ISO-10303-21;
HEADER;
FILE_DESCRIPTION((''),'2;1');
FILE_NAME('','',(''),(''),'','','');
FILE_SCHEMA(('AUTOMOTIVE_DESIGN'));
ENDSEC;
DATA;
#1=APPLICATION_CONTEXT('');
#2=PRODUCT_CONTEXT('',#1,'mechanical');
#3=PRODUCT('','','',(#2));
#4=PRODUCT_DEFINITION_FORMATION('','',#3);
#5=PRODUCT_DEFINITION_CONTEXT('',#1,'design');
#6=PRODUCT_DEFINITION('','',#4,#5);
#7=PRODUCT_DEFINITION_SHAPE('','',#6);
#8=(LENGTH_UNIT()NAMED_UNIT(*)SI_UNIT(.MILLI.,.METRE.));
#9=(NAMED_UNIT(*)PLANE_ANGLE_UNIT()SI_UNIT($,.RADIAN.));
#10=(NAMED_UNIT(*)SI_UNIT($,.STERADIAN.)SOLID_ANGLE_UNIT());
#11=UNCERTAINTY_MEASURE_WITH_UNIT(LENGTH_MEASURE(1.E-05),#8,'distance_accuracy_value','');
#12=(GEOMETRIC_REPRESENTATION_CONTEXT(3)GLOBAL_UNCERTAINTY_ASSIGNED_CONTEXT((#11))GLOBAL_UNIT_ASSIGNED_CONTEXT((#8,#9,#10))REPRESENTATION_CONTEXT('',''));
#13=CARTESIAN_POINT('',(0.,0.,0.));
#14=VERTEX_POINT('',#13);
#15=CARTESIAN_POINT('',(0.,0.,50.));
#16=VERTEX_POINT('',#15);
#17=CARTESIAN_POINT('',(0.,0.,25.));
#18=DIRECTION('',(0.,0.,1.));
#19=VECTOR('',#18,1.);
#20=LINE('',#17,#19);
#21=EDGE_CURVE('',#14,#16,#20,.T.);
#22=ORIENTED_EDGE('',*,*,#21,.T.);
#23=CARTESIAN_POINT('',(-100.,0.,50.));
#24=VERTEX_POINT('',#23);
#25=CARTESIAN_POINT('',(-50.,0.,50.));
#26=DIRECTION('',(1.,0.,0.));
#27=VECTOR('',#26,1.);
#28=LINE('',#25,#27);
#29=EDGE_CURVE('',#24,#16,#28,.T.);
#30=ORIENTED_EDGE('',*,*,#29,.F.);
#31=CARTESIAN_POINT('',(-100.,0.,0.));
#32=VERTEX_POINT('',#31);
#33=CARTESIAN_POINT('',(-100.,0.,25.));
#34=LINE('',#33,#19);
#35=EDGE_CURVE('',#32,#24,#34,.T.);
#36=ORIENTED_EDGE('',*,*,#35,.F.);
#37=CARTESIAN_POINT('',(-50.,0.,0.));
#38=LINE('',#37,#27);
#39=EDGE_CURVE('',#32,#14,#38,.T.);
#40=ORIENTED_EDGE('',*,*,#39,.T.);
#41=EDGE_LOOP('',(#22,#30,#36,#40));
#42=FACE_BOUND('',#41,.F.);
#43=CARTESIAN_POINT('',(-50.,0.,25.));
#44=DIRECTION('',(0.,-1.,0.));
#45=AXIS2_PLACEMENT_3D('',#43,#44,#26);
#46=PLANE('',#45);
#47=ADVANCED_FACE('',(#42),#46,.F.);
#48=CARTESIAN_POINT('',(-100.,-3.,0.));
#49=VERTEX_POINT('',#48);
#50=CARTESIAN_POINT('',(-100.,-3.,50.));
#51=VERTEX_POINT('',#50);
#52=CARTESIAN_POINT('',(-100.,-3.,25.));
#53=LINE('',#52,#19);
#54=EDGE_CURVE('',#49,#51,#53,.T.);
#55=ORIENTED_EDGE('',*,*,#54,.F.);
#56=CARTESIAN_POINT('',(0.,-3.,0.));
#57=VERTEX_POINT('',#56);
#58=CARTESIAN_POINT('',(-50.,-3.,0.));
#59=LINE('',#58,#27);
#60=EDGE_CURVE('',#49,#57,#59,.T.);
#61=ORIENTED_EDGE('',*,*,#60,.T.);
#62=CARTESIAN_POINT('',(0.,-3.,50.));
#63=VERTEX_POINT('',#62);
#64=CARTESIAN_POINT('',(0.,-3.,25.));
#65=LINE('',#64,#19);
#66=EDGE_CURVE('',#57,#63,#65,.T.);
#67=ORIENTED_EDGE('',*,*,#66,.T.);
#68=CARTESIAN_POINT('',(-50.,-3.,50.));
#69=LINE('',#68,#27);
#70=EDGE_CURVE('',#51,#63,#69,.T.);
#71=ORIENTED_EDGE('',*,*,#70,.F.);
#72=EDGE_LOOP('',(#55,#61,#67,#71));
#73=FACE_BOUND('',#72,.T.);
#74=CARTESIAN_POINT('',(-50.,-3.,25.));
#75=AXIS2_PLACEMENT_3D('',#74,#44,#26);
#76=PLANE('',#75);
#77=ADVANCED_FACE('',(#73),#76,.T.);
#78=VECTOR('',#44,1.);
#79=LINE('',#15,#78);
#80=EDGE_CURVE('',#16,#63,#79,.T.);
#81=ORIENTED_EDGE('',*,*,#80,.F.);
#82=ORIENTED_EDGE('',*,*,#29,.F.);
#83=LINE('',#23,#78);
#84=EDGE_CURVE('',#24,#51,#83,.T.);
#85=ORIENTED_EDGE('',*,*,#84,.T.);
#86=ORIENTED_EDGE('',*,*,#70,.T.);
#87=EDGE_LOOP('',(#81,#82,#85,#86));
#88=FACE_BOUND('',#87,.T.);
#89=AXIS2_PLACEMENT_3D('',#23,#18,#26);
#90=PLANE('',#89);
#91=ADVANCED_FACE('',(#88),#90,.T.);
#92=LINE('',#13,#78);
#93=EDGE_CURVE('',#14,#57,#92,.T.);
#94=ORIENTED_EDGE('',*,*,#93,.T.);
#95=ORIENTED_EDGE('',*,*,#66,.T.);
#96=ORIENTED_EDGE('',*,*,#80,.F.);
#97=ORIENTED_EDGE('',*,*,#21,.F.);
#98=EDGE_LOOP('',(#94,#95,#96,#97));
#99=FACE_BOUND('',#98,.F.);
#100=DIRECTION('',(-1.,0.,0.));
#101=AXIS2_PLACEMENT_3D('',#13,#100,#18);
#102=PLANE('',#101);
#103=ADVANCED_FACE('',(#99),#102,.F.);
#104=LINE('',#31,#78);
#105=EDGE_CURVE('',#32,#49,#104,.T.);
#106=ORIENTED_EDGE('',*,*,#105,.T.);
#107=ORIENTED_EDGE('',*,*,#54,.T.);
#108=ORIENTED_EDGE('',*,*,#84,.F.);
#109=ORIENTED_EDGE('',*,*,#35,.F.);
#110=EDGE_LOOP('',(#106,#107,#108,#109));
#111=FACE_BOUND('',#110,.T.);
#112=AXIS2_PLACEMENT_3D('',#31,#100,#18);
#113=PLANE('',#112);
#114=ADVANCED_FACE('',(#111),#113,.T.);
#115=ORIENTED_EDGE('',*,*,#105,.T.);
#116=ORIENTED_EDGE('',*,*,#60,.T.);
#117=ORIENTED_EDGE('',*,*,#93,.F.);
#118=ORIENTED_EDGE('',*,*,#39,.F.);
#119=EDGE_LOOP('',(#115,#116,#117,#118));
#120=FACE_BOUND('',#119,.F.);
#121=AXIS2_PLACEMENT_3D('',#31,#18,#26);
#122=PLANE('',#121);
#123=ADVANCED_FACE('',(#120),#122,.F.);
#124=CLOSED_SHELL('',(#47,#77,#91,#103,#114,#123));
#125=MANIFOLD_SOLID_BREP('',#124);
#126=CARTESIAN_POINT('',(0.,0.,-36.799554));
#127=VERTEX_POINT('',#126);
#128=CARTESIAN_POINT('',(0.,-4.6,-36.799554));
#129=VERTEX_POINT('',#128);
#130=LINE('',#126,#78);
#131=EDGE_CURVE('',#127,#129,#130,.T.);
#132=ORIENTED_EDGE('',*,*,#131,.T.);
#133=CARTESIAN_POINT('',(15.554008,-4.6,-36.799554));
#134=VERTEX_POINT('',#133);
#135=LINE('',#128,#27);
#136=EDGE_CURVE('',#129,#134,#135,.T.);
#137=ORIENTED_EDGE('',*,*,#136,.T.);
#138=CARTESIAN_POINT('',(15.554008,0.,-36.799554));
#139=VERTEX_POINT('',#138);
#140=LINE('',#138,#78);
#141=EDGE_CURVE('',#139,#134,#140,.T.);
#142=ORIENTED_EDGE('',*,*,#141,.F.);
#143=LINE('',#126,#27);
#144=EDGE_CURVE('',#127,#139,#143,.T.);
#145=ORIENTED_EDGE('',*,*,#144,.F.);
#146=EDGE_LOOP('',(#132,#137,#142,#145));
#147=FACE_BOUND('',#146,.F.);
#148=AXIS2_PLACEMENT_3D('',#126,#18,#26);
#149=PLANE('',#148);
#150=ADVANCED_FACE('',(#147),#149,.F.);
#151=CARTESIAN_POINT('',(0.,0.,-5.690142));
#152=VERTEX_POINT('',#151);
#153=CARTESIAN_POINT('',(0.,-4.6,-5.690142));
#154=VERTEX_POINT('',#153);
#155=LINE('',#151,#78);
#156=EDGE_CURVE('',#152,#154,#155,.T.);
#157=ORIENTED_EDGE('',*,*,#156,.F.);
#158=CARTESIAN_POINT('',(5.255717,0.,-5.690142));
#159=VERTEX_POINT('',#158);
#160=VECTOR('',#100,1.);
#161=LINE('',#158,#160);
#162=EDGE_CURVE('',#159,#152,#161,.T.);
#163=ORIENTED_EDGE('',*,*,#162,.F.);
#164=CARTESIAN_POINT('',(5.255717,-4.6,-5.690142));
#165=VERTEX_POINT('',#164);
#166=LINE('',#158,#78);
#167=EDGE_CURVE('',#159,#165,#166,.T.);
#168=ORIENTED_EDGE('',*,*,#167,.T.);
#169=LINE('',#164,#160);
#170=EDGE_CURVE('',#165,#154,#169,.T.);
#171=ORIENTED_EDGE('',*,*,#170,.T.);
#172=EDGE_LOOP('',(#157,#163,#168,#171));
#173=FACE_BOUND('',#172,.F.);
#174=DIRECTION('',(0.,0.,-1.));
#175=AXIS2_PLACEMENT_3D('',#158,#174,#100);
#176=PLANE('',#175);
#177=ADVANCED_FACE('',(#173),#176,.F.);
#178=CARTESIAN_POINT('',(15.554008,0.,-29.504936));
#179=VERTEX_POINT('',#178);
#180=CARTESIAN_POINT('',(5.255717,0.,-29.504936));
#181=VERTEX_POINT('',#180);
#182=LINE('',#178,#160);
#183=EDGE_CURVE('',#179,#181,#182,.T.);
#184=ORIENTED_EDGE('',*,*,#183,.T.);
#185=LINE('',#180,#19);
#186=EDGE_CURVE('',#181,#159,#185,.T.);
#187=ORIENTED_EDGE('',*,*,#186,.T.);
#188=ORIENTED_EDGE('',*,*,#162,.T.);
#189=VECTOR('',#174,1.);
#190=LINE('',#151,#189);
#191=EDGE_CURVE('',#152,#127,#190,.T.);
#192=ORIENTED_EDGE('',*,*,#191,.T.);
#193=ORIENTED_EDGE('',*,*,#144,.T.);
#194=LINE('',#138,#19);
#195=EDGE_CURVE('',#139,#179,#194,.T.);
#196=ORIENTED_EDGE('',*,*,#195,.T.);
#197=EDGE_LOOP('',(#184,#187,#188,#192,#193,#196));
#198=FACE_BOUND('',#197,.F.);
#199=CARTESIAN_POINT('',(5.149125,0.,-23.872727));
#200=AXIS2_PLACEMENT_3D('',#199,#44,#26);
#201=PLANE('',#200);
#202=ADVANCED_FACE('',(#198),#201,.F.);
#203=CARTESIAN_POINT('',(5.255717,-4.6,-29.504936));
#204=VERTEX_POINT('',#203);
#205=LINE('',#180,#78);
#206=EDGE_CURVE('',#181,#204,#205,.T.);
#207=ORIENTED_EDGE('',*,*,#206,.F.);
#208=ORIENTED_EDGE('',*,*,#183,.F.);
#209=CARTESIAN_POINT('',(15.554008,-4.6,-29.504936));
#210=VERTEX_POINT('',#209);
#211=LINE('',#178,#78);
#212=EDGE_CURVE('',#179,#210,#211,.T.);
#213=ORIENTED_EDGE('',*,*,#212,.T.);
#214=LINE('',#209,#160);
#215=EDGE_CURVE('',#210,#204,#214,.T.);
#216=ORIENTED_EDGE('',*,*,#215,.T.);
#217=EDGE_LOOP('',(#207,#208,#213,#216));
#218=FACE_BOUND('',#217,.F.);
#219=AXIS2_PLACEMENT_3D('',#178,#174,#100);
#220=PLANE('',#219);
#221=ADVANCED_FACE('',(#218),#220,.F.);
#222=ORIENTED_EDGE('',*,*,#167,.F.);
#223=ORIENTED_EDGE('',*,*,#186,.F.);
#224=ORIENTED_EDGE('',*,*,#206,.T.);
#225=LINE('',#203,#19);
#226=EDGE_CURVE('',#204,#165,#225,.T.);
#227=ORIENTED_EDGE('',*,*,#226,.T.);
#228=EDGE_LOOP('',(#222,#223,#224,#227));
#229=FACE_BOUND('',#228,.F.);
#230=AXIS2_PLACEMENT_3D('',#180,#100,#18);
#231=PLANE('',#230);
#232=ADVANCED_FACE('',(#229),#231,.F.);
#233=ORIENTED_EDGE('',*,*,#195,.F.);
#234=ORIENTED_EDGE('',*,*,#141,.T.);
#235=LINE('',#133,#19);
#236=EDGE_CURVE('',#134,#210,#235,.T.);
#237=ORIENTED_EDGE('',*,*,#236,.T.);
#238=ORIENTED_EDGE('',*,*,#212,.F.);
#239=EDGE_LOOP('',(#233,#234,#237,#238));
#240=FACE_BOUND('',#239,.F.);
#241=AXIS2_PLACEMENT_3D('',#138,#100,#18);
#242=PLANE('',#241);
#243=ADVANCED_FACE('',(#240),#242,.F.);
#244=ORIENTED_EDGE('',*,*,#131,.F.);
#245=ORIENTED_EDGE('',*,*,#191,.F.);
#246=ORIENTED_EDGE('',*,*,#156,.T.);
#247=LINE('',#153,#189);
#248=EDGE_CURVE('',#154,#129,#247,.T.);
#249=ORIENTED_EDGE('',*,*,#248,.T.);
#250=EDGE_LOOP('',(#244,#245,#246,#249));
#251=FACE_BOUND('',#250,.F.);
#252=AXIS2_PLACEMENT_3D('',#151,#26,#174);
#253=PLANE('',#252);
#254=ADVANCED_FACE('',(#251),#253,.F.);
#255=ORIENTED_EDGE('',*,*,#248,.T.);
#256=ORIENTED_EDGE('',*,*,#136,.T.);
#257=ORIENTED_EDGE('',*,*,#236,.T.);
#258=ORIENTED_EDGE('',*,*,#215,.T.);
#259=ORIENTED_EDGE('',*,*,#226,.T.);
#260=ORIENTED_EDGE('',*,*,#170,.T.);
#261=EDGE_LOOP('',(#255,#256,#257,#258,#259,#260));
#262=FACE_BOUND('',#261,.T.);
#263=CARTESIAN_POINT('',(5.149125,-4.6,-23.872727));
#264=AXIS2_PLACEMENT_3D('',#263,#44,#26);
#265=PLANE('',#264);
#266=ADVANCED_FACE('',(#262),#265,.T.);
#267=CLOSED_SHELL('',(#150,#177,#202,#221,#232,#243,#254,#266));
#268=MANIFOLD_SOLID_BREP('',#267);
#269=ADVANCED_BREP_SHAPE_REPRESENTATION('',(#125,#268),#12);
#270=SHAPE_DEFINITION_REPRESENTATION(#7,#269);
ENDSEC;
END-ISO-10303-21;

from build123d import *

# Parameters (mm, degrees)
F0_W     = 100
F0_H     = 50
F1_DEPTH = 3
F3_DEPTH = 4.6


# Not quite as in the source:
# - a feature names something its author has since deleted; it is built from what else it names


with BuildPart() as f1:
    # F0 (on Front) → F1 (new body)
    with BuildSketch(Plane.XZ):
        with Locations((-50, 25)):
            Rectangle(F0_W, F0_H)
    extrude(amount=F1_DEPTH)


with BuildPart() as f3:
    # F2 (on Front) → F3 (new body)
    with BuildSketch(Plane.XZ):
        Polygon((5.2557173185, -5.6901420467), (0, -5.6901420467), (0, -36.7995537817), (15.5540080741, -36.7995537817), (15.5540080741, -29.5049361885), (5.2557173185, -29.5049361885), align=None)
    extrude(amount=F3_DEPTH)


solid = Compound([f1.part, f3.part])
